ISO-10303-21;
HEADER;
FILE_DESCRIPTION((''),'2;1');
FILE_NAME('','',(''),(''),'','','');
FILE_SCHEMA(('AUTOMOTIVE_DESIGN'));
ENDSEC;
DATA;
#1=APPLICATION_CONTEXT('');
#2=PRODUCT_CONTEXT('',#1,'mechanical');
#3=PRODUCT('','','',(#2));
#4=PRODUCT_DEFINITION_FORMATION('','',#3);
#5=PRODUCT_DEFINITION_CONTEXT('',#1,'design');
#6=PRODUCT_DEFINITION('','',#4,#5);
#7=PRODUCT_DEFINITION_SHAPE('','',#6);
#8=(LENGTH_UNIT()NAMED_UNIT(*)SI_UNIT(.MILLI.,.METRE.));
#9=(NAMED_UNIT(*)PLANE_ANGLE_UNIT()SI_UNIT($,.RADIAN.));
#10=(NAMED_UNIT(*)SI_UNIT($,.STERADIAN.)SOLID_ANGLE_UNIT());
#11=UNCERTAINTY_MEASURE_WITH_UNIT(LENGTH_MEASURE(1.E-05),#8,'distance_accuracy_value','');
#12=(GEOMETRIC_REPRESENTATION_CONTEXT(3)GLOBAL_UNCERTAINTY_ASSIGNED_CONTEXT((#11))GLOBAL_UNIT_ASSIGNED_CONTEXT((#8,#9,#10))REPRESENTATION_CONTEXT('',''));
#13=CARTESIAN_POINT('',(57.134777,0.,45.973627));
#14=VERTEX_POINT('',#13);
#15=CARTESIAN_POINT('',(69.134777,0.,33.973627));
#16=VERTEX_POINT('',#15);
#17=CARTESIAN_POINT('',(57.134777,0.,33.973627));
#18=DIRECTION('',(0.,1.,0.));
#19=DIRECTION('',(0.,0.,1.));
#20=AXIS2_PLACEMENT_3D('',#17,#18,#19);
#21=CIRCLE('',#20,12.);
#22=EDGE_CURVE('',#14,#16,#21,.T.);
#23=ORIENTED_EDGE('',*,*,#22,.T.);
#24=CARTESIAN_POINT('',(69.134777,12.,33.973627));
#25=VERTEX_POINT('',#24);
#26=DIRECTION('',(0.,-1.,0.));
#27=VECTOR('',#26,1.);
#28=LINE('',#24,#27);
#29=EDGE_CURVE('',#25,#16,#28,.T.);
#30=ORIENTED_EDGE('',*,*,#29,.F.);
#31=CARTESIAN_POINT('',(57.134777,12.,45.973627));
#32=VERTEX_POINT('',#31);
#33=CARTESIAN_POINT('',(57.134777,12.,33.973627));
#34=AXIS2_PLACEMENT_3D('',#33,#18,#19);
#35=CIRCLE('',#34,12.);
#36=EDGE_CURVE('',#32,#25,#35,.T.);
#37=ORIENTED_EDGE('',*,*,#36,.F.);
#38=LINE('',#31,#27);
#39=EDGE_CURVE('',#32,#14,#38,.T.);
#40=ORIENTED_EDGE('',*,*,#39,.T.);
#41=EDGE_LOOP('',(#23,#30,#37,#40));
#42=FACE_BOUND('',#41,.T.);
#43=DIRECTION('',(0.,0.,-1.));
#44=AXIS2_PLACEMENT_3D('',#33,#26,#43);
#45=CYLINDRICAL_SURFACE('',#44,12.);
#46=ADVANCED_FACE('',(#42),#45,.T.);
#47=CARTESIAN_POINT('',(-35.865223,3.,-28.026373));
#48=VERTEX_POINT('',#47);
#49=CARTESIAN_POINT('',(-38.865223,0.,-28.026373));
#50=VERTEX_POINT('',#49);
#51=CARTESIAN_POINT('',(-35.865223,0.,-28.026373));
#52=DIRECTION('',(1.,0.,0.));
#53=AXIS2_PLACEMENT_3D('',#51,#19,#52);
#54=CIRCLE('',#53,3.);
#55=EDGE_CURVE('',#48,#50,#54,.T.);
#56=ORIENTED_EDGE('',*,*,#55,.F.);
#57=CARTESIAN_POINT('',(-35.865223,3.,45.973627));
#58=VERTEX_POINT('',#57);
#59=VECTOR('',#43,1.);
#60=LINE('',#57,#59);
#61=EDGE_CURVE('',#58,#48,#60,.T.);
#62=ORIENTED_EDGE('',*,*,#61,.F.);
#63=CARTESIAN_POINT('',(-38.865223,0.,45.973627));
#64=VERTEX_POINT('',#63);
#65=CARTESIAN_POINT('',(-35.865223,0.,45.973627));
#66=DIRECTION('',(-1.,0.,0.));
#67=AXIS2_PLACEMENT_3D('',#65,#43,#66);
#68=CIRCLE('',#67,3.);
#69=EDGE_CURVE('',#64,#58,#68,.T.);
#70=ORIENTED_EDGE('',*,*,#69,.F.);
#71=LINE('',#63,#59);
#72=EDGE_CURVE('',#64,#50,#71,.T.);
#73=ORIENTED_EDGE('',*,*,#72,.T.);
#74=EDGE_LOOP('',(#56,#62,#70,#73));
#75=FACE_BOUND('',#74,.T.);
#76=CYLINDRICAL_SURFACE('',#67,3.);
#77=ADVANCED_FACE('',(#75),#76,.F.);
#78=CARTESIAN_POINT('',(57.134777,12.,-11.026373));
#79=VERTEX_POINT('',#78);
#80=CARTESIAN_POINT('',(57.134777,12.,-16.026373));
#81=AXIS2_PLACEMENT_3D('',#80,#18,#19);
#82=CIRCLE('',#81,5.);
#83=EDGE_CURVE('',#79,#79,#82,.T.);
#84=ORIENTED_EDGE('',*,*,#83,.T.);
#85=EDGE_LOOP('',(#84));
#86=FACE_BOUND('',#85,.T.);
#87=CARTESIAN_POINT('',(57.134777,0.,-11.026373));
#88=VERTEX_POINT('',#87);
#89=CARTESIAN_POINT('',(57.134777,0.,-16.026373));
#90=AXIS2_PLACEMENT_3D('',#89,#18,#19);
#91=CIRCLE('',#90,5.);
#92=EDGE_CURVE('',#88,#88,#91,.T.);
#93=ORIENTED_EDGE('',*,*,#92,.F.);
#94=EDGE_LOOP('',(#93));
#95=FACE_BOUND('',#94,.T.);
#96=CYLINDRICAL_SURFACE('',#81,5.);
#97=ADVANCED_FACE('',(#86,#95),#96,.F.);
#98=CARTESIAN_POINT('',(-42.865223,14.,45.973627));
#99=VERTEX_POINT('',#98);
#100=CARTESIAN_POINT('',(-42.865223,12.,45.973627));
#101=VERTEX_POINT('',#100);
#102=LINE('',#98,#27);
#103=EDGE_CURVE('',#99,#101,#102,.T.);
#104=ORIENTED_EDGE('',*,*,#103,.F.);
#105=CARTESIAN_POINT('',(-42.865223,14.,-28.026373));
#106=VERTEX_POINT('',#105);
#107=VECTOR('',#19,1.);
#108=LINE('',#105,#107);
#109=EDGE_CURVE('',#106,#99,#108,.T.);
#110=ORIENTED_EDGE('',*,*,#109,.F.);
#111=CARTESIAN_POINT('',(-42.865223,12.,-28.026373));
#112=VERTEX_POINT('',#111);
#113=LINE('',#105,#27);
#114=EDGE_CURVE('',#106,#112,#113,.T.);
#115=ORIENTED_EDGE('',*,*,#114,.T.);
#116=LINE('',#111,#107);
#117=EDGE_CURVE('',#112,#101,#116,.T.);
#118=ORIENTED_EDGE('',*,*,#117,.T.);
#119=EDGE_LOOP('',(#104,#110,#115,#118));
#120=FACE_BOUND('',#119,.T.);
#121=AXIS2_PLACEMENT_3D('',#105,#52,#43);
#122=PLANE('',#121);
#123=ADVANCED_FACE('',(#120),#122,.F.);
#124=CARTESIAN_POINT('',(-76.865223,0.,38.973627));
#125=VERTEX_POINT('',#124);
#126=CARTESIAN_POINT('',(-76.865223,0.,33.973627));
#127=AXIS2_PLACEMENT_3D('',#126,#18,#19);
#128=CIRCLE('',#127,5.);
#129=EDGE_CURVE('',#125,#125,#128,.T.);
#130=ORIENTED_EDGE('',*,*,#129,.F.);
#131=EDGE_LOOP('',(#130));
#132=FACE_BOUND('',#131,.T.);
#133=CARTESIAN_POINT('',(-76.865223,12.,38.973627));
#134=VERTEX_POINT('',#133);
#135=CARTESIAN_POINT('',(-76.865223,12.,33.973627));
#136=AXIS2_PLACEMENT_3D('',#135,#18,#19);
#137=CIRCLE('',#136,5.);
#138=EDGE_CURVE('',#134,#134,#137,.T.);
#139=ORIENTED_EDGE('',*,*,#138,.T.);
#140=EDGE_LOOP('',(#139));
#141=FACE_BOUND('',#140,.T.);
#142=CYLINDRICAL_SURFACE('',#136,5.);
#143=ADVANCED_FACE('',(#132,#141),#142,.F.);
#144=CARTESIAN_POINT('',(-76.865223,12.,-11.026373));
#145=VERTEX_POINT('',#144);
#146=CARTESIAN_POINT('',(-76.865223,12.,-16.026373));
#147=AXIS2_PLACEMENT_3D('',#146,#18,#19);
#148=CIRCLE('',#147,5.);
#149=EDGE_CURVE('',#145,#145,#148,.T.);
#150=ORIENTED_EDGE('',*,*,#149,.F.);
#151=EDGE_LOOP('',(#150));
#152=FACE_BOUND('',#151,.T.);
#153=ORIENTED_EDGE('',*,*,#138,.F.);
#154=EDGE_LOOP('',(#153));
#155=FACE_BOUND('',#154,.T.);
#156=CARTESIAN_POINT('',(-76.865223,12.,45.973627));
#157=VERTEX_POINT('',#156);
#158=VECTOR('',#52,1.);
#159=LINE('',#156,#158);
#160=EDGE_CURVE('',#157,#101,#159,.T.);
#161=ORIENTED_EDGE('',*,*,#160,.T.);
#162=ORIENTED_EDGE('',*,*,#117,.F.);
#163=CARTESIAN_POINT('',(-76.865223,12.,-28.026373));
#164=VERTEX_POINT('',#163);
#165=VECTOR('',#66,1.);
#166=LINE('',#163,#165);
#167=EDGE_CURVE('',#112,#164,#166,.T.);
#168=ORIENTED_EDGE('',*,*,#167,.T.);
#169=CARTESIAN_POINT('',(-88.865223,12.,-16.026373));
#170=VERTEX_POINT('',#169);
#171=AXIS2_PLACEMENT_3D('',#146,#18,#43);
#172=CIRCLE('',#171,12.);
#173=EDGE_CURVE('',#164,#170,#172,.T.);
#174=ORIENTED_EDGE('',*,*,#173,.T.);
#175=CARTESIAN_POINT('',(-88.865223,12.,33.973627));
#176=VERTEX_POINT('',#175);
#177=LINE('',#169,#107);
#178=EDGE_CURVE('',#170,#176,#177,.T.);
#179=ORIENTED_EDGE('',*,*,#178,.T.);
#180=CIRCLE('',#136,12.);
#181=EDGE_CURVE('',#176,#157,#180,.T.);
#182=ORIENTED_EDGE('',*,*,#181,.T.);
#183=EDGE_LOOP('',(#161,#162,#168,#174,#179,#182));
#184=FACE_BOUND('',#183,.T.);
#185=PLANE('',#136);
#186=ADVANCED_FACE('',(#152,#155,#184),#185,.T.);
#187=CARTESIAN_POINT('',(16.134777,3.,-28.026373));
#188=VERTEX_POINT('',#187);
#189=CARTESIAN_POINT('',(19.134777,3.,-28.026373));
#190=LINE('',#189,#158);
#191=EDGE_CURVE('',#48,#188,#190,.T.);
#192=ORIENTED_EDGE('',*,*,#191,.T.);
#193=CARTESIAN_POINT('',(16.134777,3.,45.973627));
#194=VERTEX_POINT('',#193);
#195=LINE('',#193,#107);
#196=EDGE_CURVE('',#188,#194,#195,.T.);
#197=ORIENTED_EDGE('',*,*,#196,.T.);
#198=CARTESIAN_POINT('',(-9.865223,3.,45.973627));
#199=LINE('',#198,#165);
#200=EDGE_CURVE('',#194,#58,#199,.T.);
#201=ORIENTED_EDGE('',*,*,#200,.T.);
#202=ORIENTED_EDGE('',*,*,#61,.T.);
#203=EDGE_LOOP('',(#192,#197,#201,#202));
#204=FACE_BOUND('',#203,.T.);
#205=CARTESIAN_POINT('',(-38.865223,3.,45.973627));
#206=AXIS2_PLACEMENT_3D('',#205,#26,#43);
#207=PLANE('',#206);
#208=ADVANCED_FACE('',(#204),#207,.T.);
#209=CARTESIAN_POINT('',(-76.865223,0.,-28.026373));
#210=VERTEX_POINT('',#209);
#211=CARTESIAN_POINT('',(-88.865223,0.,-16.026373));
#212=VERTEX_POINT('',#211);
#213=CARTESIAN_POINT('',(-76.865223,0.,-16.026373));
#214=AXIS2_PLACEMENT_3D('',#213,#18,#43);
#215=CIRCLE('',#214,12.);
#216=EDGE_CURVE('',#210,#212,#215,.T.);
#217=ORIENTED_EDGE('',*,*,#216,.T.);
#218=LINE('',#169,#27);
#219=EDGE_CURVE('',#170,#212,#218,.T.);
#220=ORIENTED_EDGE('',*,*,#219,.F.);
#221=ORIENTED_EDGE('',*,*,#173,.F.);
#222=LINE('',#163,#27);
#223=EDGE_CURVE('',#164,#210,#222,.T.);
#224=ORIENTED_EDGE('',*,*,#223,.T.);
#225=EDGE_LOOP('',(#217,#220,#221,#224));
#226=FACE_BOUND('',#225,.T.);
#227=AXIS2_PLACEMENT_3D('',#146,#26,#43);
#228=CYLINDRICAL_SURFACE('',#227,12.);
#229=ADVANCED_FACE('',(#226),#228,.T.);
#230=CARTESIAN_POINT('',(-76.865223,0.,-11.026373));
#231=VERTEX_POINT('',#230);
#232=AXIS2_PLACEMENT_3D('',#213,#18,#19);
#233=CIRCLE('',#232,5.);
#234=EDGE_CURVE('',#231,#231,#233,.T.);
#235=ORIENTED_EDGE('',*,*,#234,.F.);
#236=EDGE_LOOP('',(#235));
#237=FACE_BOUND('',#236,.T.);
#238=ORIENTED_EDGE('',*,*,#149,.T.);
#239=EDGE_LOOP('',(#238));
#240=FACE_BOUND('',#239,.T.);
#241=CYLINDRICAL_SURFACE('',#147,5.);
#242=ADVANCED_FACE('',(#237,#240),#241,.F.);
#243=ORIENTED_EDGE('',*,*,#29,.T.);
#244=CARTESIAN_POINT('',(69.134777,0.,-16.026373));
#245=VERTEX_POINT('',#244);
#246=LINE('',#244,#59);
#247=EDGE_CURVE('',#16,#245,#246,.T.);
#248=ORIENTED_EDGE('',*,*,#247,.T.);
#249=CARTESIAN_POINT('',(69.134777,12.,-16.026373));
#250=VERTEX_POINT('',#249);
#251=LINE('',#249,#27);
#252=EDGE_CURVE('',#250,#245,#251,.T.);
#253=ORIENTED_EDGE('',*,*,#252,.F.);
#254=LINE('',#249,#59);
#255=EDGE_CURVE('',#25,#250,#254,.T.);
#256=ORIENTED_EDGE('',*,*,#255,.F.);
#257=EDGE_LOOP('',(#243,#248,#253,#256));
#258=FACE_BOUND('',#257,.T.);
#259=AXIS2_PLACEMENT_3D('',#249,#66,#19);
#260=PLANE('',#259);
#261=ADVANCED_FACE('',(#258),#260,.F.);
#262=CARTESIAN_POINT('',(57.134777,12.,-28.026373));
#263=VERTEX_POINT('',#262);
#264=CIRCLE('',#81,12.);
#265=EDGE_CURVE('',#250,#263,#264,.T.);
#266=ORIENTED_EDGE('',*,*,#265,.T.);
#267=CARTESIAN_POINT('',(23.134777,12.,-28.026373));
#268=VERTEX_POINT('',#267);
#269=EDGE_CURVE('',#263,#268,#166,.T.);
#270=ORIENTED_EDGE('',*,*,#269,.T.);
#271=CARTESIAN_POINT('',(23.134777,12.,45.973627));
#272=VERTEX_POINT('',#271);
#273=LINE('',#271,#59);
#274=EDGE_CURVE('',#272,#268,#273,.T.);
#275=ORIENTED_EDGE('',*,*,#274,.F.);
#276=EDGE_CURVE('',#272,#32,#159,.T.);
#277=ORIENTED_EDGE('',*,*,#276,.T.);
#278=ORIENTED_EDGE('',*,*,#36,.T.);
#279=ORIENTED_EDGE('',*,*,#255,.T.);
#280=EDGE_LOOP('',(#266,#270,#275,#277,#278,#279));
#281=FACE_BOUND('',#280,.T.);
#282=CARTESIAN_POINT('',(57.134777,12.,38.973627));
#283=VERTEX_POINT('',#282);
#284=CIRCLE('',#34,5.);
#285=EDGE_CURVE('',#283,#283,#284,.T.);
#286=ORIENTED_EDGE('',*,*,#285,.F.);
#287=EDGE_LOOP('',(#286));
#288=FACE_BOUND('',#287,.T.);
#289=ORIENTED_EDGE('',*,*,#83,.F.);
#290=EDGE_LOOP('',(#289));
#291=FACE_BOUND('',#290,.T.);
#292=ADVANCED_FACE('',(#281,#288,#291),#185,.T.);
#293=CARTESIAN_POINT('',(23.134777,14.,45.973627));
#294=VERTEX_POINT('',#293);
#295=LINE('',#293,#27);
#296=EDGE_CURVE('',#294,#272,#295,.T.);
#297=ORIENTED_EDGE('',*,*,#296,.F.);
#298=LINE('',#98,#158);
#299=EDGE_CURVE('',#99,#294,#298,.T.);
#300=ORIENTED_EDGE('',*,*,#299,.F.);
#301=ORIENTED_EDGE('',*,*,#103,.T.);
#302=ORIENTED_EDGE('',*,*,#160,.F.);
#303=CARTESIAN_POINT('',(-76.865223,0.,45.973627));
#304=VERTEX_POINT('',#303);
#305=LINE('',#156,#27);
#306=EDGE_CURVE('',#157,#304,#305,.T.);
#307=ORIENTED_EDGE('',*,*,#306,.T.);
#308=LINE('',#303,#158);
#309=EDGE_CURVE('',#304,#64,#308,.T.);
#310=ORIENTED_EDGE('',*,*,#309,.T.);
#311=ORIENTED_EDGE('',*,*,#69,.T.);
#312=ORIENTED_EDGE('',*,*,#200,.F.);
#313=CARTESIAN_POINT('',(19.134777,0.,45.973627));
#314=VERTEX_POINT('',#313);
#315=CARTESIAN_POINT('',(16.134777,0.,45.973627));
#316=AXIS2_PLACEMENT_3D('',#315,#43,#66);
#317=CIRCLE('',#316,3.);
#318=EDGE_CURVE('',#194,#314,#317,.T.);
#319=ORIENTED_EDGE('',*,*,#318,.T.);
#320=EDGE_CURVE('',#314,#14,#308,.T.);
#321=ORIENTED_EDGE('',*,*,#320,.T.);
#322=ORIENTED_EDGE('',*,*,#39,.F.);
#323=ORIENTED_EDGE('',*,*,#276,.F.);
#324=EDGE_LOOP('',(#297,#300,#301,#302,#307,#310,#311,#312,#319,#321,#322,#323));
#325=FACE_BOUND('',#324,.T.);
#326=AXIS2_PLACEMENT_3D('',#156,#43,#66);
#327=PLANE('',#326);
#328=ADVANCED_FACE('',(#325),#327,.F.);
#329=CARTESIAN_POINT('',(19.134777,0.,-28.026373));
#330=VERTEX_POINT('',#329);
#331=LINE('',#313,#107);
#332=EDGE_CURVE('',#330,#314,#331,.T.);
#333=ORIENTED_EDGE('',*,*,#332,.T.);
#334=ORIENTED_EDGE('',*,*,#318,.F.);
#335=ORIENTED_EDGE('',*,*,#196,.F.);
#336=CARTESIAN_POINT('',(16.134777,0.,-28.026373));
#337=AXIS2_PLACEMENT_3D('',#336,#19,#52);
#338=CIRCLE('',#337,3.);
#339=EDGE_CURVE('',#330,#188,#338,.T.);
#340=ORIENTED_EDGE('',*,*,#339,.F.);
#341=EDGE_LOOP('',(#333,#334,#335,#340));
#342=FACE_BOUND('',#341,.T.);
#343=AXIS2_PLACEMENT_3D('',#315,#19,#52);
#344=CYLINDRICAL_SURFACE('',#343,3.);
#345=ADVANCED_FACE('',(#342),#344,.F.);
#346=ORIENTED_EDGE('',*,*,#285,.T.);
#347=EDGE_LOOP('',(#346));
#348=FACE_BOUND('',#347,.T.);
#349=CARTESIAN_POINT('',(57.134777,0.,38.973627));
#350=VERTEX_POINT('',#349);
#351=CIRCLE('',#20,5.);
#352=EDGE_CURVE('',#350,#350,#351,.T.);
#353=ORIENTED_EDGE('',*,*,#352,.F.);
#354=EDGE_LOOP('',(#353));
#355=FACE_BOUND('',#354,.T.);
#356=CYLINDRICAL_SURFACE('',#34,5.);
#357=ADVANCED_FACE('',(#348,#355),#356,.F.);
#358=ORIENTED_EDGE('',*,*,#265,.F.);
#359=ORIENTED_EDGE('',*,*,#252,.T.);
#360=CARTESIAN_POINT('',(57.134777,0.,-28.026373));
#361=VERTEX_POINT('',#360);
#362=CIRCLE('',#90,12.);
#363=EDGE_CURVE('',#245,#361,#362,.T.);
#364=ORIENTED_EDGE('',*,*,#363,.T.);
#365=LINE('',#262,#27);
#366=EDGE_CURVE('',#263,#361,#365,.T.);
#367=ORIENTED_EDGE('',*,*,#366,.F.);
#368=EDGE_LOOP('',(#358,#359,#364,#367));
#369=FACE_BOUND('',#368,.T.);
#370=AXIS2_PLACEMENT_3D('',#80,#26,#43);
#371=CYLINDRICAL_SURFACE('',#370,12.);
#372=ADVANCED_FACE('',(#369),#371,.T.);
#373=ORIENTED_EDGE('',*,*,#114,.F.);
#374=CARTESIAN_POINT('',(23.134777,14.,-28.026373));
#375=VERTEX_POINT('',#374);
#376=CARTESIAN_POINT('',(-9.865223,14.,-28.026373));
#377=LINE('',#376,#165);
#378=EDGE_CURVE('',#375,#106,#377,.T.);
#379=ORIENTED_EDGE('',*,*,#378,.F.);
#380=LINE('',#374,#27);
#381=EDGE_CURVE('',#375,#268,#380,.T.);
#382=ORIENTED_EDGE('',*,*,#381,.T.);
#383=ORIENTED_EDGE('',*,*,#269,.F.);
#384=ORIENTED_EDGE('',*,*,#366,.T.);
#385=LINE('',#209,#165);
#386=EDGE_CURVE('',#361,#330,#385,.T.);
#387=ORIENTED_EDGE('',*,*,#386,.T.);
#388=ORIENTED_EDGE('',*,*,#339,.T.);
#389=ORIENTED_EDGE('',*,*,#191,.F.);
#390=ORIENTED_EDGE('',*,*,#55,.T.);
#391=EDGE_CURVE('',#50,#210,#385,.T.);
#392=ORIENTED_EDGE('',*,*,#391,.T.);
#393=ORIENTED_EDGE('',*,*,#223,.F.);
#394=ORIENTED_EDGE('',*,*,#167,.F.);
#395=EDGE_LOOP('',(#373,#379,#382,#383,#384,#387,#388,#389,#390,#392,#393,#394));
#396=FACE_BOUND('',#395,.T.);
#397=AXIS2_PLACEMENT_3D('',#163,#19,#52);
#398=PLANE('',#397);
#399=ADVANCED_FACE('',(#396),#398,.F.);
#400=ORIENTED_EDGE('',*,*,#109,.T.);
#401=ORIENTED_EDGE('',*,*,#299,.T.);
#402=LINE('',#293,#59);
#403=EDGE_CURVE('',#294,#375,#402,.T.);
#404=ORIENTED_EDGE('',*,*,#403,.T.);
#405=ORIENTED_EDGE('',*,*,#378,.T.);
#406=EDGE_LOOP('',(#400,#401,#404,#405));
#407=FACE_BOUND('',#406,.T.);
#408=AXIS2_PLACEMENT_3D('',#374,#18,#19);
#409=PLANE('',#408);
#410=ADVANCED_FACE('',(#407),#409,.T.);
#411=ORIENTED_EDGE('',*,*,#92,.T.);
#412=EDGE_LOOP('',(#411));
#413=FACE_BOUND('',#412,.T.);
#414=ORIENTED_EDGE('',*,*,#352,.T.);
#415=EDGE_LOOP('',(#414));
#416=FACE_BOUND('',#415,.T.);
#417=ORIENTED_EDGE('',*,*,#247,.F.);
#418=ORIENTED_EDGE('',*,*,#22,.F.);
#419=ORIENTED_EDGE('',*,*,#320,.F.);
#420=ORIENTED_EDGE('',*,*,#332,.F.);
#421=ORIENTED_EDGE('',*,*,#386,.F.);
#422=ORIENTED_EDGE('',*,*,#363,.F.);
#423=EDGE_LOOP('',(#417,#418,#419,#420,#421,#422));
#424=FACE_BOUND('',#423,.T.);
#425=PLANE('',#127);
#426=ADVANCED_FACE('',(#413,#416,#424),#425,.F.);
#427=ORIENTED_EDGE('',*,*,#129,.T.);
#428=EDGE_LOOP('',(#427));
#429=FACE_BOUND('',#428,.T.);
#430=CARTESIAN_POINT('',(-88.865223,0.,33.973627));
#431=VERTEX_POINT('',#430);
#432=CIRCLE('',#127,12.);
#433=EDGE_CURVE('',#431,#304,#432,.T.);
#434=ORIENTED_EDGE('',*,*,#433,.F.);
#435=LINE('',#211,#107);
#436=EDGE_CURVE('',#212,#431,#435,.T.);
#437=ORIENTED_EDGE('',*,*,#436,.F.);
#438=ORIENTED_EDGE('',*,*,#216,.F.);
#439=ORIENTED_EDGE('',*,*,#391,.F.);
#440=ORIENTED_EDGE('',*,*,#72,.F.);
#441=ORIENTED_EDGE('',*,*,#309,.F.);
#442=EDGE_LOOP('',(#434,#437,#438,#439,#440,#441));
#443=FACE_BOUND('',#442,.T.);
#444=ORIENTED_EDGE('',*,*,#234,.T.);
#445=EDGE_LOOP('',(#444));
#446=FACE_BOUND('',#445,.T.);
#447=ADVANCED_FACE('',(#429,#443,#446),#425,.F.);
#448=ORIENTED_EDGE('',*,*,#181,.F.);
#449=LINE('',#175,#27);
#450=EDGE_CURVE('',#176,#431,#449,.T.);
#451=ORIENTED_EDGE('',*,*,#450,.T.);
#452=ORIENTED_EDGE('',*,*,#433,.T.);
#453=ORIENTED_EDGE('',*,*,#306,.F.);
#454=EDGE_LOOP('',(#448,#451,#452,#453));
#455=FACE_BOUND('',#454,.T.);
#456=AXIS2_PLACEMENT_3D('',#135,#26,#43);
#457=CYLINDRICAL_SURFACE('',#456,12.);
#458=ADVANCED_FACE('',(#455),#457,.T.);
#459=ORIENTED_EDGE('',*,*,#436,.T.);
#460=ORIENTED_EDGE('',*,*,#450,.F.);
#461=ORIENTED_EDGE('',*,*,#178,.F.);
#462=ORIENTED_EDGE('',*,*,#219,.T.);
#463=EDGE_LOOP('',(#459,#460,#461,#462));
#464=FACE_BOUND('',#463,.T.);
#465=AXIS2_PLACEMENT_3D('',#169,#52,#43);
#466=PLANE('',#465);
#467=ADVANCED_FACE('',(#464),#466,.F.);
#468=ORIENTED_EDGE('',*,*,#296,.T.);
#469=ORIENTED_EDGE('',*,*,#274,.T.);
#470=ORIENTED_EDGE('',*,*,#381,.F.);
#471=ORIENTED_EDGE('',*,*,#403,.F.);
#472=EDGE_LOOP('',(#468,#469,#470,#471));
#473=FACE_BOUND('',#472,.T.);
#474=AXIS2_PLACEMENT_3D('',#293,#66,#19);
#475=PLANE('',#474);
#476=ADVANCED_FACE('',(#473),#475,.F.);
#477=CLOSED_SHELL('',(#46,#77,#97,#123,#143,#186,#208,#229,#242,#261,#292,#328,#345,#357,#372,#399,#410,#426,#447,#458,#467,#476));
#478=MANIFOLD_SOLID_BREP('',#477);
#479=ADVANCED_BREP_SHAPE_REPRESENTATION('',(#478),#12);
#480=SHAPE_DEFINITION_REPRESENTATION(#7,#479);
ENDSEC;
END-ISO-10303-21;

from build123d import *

# Parameters (mm, degrees)
BOSS_EXTRUDE1_DEPTH = 12
BOSS_EXTRUDE2_DEPTH = 2
CUT_EXTRUDE1_DEPTH  = 3
FILLET1_R           = 3
FILLET2_R           = 3
HOLE2_D             = 10
HOLE3_D             = 10
HOLE4_D             = 10
HOLE5_D             = 10


with BuildPart() as part:
    # Sketch1 → Boss-Extrude1 (new body)
    with BuildSketch(Plane(origin=(0, 0, 0), x_dir=(1, 0, 0), z_dir=(0, 1, 0))):
        with BuildLine():
            Line((-76.865222767, 28.026373193), (57.134777233, 28.026373193))
            ThreePointArc((57.134777233, 28.026373193), (65.620058607, 24.511654567), (69.134777233, 16.026373193))
            Line((69.134777233, 16.026373193), (69.134777233, -33.973626807))
            ThreePointArc((69.134777233, -33.973626807), (65.620058607, -42.458908182), (57.134777233, -45.973626807))
            Line((57.134777233, -45.973626807), (-76.865222767, -45.973626807))
            ThreePointArc((-76.865222767, -45.973626807), (-85.350504141, -42.458908182), (-88.865222767, -33.973626807))
            Line((-88.865222767, -33.973626807), (-88.865222767, 16.026373193))
            ThreePointArc((-88.865222767, 16.026373193), (-85.350504141, 24.511654567), (-76.865222767, 28.026373193))
        make_face()
    extrude(amount=BOSS_EXTRUDE1_DEPTH)

    # Sketch2 → Boss-Extrude2 (add)
    with BuildSketch(Plane(origin=(0, 12, 0), x_dir=(-1, 0, 0), z_dir=(0, 1, 0))):
        Polygon((9.865222767, -28.026373193), (42.865222767, -28.026373193), (42.865222767, 45.973626807), (-23.134777233, 45.973626807), (-23.134777233, -28.026373193), align=None)
    extrude(amount=BOSS_EXTRUDE2_DEPTH)

    # Sketch3 → Cut-Extrude1 (cut)
    with BuildSketch(Plane.XZ):
        Polygon((-9.865222767, 45.973626807), (19.134777233, 45.973626807), (19.134777233, -28.026373193), (-38.865222767, -28.026373193), (-38.865222767, 45.973626807), align=None)
    extrude(amount=-CUT_EXTRUDE1_DEPTH, mode=Mode.SUBTRACT)

    # Fillet1
    fillet1_edges = [part.edges().sort_by_distance(p)[0] for p in [
        (-38.865222767, 3, 8.973626807),
    ]]
    fillet(fillet1_edges, radius=FILLET1_R - 0.0001)  # a hair under: the kernel refuses the full size

    # Fillet2
    fillet2_edges = [part.edges().sort_by_distance(p)[0] for p in [
        (19.134777233, 3, 8.973626807),
    ]]
    fillet(fillet2_edges, radius=FILLET2_R - 0.0001)  # a hair under: the kernel refuses the full size

    # Hole2 (through all)
    with Locations(Plane(origin=(0, 12, 0), x_dir=(-1, 0, 0), z_dir=(0, 1, 0))):
        with Locations((76.865222767, -16.026373193)):
            Hole(HOLE2_D / 2)

    # Hole3 (through all)
    with Locations(Plane(origin=(0, 12, 0), x_dir=(-1, 0, 0), z_dir=(0, 1, 0))):
        with Locations((76.865222767, 33.973626807)):
            Hole(HOLE3_D / 2)

    # Hole4 (through all)
    with Locations(Plane(origin=(0, 12, 0), x_dir=(-1, 0, 0), z_dir=(0, 1, 0))):
        with Locations((-57.134777233, 33.973626807)):
            Hole(HOLE4_D / 2)

    # Hole5 (through all)
    with Locations(Plane(origin=(0, 12, 0), x_dir=(-1, 0, 0), z_dir=(0, 1, 0))):
        with Locations((-57.134777233, -16.026373193)):
            Hole(HOLE5_D / 2)


solid = part.part
